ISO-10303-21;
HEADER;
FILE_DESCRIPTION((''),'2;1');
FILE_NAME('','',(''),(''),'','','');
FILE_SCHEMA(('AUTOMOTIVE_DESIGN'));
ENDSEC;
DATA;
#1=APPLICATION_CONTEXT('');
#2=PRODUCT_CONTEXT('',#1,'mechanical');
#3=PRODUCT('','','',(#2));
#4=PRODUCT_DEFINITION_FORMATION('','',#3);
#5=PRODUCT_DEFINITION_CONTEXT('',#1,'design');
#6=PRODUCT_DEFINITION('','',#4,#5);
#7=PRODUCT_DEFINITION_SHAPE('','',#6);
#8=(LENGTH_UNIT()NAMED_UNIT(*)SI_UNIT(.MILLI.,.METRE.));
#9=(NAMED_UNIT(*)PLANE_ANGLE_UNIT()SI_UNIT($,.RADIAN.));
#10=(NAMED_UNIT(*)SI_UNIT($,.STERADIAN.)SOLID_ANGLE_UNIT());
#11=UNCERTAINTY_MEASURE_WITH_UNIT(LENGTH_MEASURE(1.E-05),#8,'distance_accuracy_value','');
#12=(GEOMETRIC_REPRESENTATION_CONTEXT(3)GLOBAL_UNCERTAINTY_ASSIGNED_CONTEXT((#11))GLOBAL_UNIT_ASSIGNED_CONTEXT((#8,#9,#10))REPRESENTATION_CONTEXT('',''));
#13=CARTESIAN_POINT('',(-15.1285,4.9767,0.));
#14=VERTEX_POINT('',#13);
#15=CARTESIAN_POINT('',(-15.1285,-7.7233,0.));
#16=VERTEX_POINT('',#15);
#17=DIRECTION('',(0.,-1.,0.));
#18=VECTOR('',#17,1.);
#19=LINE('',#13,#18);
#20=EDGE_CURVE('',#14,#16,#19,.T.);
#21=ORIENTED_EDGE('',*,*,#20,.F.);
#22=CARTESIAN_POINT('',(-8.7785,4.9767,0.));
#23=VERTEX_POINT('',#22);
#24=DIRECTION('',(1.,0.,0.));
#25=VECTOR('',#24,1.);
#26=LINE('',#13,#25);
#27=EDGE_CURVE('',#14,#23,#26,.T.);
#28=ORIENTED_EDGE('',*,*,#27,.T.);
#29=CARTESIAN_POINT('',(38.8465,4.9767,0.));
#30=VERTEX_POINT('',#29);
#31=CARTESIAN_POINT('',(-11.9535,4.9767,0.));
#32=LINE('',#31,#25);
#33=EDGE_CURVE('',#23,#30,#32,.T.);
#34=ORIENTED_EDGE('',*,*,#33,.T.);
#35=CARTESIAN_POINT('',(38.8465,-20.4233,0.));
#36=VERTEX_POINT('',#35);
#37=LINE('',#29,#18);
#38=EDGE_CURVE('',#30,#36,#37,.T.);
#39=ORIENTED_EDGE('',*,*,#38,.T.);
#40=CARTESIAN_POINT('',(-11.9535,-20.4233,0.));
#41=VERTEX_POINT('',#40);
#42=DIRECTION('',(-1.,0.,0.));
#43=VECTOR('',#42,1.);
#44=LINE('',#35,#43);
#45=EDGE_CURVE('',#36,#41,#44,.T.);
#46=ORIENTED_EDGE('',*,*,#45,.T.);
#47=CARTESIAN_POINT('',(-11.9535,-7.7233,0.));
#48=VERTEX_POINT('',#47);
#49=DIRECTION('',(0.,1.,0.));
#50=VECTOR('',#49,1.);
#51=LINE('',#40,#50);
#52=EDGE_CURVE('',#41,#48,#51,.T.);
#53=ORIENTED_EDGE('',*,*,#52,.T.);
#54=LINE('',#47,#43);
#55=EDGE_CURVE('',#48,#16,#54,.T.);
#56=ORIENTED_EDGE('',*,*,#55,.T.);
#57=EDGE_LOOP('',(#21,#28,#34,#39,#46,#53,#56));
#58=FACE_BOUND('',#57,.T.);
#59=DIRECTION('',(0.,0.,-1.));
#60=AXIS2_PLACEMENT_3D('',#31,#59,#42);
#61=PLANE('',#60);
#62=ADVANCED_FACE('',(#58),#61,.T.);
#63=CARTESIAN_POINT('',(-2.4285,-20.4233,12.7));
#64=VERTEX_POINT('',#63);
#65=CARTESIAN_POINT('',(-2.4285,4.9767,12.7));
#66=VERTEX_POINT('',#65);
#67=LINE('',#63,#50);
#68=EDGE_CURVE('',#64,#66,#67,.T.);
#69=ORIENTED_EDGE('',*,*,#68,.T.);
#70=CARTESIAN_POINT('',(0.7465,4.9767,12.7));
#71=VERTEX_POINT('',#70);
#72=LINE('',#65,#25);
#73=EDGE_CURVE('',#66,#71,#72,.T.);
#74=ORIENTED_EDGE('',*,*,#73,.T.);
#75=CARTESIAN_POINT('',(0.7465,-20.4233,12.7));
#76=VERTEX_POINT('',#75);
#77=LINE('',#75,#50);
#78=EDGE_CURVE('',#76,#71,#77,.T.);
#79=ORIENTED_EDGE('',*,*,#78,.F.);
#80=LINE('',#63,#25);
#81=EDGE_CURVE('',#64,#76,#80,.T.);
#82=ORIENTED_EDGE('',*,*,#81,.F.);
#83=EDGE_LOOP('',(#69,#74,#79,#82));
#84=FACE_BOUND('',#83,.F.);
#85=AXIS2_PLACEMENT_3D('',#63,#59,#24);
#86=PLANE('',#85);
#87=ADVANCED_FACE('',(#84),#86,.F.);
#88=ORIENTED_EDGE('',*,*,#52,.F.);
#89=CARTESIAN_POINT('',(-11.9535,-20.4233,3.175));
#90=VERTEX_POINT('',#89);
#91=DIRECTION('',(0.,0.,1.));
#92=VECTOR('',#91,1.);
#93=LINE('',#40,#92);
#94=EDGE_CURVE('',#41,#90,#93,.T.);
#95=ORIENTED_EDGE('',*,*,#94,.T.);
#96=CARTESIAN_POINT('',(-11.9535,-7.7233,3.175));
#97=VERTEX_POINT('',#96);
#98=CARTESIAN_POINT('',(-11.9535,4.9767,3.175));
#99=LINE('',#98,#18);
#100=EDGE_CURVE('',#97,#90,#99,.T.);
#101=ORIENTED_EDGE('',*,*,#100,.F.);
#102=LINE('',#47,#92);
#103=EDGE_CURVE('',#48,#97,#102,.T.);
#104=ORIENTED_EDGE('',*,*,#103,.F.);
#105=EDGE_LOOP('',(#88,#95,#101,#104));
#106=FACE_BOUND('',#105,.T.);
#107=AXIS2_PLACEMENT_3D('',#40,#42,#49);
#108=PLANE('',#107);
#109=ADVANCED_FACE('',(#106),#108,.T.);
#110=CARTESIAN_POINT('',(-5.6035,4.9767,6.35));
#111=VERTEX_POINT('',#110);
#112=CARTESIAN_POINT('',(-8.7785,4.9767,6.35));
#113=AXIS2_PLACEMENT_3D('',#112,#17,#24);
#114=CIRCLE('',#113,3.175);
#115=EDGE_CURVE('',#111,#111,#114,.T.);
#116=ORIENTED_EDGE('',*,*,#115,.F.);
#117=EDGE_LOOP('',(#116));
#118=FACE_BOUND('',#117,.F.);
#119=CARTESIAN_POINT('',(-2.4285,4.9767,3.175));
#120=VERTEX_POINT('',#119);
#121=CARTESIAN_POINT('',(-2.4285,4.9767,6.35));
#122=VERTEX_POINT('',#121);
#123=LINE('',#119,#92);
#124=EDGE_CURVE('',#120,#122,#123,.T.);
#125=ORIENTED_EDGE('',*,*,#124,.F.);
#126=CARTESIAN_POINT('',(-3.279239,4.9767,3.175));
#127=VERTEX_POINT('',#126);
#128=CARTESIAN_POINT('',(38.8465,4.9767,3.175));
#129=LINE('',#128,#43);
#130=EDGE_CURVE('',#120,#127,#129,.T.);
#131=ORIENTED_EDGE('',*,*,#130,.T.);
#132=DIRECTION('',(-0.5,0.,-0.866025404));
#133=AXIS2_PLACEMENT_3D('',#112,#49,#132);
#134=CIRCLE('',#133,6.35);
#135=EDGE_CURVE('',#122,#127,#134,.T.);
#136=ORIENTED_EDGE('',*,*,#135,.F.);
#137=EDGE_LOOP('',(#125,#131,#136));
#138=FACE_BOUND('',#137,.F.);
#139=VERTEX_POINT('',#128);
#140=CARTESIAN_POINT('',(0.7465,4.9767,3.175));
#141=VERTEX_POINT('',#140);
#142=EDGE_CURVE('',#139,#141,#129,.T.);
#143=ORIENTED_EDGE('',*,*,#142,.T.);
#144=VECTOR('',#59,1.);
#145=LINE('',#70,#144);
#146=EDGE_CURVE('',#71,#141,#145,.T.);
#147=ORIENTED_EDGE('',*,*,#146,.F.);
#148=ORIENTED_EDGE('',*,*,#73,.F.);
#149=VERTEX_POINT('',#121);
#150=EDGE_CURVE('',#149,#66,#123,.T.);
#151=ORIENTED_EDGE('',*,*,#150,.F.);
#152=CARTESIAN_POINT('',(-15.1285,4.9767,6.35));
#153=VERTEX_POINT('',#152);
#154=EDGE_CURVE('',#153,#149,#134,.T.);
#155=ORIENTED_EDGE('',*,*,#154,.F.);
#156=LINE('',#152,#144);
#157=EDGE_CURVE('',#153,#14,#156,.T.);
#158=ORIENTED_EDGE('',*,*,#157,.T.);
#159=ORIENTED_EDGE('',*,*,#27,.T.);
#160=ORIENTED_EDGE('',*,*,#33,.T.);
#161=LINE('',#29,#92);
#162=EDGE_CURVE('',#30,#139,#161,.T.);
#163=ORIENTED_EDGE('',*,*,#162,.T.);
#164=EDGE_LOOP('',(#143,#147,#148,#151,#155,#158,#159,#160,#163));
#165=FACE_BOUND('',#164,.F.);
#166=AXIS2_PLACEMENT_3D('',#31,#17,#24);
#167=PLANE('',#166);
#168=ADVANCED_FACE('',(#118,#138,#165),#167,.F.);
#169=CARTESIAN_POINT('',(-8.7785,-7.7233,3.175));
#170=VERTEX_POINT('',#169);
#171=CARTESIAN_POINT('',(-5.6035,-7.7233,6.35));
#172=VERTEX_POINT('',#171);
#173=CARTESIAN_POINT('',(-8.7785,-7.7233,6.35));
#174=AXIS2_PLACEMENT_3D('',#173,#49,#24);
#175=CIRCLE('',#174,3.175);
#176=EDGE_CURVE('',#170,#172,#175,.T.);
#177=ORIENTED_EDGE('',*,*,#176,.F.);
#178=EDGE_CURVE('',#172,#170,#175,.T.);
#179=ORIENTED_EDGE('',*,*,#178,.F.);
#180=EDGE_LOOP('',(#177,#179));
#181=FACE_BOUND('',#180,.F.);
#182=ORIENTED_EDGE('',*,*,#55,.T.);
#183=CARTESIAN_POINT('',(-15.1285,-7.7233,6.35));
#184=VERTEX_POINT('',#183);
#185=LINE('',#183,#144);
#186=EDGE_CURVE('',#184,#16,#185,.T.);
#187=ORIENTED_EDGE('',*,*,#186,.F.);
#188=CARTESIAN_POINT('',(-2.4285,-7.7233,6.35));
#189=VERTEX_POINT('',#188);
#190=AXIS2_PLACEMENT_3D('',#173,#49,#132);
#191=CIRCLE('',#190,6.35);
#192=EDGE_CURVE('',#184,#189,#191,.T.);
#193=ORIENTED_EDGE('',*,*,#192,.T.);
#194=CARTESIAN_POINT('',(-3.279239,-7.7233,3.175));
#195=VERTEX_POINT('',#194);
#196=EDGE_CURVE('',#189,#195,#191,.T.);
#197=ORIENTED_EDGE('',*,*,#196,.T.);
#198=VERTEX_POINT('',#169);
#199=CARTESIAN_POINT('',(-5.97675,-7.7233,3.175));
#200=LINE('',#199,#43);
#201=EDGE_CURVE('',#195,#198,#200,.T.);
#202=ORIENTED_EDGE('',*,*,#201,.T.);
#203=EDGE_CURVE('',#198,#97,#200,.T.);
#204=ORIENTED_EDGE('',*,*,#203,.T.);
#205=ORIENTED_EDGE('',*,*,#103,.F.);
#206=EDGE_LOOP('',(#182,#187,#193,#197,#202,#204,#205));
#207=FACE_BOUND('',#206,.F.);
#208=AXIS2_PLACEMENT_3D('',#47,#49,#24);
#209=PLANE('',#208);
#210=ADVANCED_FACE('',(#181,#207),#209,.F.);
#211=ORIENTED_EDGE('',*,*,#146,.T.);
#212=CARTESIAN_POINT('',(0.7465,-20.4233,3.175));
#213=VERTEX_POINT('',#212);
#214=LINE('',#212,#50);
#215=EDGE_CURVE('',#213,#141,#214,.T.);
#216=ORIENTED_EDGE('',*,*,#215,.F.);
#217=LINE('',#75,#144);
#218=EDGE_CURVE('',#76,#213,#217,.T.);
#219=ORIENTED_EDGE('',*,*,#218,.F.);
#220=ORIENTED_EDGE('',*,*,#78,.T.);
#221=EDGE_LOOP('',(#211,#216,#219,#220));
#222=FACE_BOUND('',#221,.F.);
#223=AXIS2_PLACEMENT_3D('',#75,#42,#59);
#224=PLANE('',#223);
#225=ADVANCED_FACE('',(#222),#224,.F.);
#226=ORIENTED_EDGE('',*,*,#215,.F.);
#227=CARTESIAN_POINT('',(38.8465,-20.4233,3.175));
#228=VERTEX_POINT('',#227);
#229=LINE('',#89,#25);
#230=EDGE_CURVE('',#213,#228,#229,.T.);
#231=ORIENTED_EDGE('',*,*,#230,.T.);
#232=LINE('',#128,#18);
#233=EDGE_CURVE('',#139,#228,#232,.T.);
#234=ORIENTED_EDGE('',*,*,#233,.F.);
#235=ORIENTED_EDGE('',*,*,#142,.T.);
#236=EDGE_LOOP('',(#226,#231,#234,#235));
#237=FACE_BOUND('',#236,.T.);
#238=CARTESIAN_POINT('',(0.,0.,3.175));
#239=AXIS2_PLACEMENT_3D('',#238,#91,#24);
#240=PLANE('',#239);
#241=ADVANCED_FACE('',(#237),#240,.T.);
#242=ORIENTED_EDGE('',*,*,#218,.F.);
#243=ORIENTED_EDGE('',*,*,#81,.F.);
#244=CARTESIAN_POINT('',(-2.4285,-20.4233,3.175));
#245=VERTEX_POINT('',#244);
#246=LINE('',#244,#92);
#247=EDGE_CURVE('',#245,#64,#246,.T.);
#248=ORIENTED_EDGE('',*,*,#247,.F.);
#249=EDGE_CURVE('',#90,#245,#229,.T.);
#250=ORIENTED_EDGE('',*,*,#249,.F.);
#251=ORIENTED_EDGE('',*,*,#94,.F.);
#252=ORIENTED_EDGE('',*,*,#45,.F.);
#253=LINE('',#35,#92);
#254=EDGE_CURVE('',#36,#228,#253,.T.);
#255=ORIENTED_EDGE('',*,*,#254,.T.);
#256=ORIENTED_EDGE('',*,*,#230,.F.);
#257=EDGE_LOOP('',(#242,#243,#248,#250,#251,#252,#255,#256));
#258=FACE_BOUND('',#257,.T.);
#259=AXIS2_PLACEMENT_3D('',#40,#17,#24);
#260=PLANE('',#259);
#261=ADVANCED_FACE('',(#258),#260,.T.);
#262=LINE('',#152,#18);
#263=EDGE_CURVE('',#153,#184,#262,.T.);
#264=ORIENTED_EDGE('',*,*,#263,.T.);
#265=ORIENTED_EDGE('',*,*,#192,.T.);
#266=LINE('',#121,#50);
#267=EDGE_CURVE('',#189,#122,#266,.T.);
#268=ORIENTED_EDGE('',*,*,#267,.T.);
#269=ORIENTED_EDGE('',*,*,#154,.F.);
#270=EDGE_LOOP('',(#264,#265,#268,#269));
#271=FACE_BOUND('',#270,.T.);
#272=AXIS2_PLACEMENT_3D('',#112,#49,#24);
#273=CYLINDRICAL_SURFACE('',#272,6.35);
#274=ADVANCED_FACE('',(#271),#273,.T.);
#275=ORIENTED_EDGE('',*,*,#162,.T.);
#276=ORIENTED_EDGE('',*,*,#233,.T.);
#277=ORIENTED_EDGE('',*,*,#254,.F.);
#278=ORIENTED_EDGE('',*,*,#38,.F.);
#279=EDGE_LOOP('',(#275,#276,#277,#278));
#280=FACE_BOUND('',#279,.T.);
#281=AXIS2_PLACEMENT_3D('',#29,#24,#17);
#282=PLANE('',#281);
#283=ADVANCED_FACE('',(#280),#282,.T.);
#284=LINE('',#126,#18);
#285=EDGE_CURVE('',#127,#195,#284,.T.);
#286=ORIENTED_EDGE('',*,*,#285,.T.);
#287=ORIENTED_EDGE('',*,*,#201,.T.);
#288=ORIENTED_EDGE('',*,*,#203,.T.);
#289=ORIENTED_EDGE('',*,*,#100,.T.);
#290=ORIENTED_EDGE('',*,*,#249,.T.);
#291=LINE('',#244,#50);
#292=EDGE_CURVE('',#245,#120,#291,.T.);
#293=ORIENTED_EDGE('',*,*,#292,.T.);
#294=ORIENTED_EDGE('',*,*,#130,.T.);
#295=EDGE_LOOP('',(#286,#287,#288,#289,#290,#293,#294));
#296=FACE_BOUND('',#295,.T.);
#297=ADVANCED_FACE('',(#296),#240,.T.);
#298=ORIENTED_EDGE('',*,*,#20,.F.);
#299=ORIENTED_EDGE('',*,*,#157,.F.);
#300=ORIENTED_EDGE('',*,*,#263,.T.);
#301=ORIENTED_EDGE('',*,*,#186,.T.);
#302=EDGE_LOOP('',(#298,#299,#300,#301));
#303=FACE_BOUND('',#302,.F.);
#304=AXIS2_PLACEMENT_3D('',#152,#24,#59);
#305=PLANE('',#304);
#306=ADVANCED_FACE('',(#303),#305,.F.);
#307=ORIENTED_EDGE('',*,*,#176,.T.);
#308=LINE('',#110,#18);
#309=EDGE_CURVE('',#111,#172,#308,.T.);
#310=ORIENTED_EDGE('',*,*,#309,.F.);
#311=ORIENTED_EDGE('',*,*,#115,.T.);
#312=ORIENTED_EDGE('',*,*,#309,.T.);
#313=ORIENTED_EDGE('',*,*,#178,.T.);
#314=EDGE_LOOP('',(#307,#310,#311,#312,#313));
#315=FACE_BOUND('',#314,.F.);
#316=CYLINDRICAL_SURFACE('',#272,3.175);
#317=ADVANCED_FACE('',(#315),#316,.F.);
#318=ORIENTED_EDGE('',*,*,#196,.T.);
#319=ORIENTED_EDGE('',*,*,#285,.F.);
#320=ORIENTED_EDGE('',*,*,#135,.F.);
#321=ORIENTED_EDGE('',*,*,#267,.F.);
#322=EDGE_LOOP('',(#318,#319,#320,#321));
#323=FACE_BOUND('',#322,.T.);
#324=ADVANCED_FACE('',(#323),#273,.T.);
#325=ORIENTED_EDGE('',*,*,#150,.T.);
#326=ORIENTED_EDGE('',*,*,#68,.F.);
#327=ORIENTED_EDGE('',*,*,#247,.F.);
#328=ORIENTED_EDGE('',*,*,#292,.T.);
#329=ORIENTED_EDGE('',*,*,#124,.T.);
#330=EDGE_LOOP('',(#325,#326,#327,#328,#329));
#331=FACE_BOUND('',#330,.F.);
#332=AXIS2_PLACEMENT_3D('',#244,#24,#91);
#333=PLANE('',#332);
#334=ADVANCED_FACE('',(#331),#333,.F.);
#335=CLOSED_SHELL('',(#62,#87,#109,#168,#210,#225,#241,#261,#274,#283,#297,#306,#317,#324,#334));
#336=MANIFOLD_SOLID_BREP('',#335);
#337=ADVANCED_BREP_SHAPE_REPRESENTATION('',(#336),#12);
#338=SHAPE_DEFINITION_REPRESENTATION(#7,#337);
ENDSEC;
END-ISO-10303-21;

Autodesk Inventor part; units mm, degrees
ref_plane "YZ Plane" through (0, 0, 0) normal (1, 0, 0) x (0, 1, 0)
ref_plane "XZ Plane" through (0, 0, 0) normal (0, 1, 0) x (-1, 0, 0)
ref_plane "XY Plane" through (0, 0, 0) normal (0, 0, 1) x (1, 0, 0)
sketch "Sketch1" plane through (0, 0, 0) normal (0, 0, 1) x (1, 0, 0)
  line L0 (-11.9535, 4.9767) -> (38.8465, 4.9767)
  line L1 (38.8465, 4.9767) -> (38.8465, -20.4233)
  line L2 (38.8465, -20.4233) -> (-11.9535, -20.4233)
  line L3 (-11.9535, -20.4233) -> (-11.9535, 4.9767)
  point P0 (0, 0)
  dimension "d0" = 50.8
  dimension "d1" = 25.4
extrude "Extrusion1" add sketch "Sketch1" along normal blind 3.175
sketch "Sketch2" plane through (-11.9535, 4.9767, 0) normal (0, 1, 0) x (1, 0, 0)
  line L0 (0, -3.175) -> (50.8, -3.175) projected
  line L1 (0, -3.175) -> (3.175, -3.175)
  line L2 (3.175, -3.175) -> (3.175, -6.35)
  circle A0 centre (3.175, -6.35) radius 3.175
  circle A1 centre (3.175, -6.35) radius 4.4901
  point P0 (11.9535, 0)
  dimension "d4" = 3.175
  dimension "d5" = 3.175
extrude "Extrusion2" add sketch "Sketch2" against normal blind 12.7
sketch "Sketch3" plane through (-11.9535, 4.9767, 0) normal (0, 1, 0) x (1, 0, 0)
  line L0 (6.35, -3.175) -> (50.8, -3.175) projected
  arc A0 (0, -3.175) -> (6.35, -3.175) centre (3.175, -6.35) ccw projected
  line L1 (7.6651, -6.35) -> (7.6651, -3.175)
  point P0 (11.9535, 0)
extrude "Extrusion3" add sketch "Sketch3" against normal blind 12.7
sketch "Sketch4" plane through (-11.9535, 4.9767, 0) normal (0, 1, 0) x (1, 0, 0)
  line L0 (7.6651, -3.175) -> (50.8, -3.175) projected
  line L1 (50.8, 0) -> (50.8, -3.175) projected
  line L2 (0, 0) -> (50.8, 0) projected
  line L3 (0, 0) -> (0, -3.175) projected
  arc A0 (0, -3.175) -> (7.6651, -6.35) centre (3.175, -6.35) ccw projected
  line L4 (7.6651, -6.35) -> (7.6651, -3.175) projected
  line L5 (7.6651, -3.175) -> (7.6651, -12.2458)
  line L6 (3.175, -10.8401) -> (7.6651, -10.8401)
  point P0 (11.9535, 0)
extrude "Extrusion4" add sketch "Sketch4" against normal blind 12.7 contours L5 L6 A0
sketch "Sketch5" plane through (-11.9535, 4.9767, 0) normal (0, 1, 0) x (1, 0, 0)
  arc A0 (0, -3.175) -> (3.175, -10.8401) centre (3.175, -6.35) ccw projected
  line L0 (3.175, -10.8401) -> (7.6651, -10.8401) projected
  line L1 (7.6651, -10.8401) -> (7.6651, -3.175) projected
  circle A1 centre (3.175, -6.35) radius 3.175 projected
  line L2 (7.6651, -3.175) -> (0, -3.175)
  point P0 (11.9535, 0)
extrude "Extrusion5" cut sketch "Sketch5" against normal blind 25.4
sketch "Sketch6" plane through (-11.9535, 4.9767, 0) normal (0, 1, 0) x (1, 0, 0)
  line L0 (0, -3.175) -> (50.8, -3.175) projected
  line L1 (0, 0) -> (50.8, 0) projected
  line L2 (0, -3.175) -> (3.175, -3.175)
  line L3 (3.175, -3.175) -> (3.175, -6.35)
  circle A0 centre (3.175, -6.35) radius 3.175
  circle A1 centre (3.175, -6.35) radius 6.35
  point P0 (11.9535, 0)
  dimension "d14" = 3.175
  dimension "d15" = 3.175
extrude "Extrusion6" add sketch "Sketch6" against normal blind 12.7
sketch "Sketch7" plane through (-11.9535, 4.9767, 0) normal (0, 1, 0) x (1, 0, 0)
  line L0 (0, 0) -> (0, -0.8507) projected
  arc A0 (0, -0.8507) -> (8.6743, -3.175) centre (3.175, -6.35) ccw projected
  line L1 (-3.175, -6.35) -> (-3.175, 0)
  line L2 (0, 0) -> (-3.175, 0)
  point P0 (11.9535, 0)
extrude "Extrusion7" add sketch "Sketch7" against normal blind 12.7
sketch "Sketch8" plane through (-11.9535, -20.4233, 0) normal (0, -1, 0) x (1, 0, 0)
  line L0 (50.8, 3.175) -> (0, 3.175) projected
  line L1 (0, 3.175) -> (6.35, 3.175)
  line L2 (6.35, 3.175) -> (9.525, 3.175)
  line L3 (9.525, 3.175) -> (9.525, 12.7)
  line L4 (9.525, 12.7) -> (12.7, 12.7)
  line L5 (12.7, 12.7) -> (12.7, 3.175)
  line L6 (12.7, 3.175) -> (9.525, 3.175)
  line L7 (9.525, 3.175) -> (9.525, 12.7)
  point P0 (11.9535, 0)
  dimension "d20" = 6.35
  dimension "d21" = 3.175
  dimension "d22" = 9.525
  dimension "d23" = 3.175
extrude "Extrusion8" add sketch "Sketch8" against normal blind 25.4
properties part number "hingely"
